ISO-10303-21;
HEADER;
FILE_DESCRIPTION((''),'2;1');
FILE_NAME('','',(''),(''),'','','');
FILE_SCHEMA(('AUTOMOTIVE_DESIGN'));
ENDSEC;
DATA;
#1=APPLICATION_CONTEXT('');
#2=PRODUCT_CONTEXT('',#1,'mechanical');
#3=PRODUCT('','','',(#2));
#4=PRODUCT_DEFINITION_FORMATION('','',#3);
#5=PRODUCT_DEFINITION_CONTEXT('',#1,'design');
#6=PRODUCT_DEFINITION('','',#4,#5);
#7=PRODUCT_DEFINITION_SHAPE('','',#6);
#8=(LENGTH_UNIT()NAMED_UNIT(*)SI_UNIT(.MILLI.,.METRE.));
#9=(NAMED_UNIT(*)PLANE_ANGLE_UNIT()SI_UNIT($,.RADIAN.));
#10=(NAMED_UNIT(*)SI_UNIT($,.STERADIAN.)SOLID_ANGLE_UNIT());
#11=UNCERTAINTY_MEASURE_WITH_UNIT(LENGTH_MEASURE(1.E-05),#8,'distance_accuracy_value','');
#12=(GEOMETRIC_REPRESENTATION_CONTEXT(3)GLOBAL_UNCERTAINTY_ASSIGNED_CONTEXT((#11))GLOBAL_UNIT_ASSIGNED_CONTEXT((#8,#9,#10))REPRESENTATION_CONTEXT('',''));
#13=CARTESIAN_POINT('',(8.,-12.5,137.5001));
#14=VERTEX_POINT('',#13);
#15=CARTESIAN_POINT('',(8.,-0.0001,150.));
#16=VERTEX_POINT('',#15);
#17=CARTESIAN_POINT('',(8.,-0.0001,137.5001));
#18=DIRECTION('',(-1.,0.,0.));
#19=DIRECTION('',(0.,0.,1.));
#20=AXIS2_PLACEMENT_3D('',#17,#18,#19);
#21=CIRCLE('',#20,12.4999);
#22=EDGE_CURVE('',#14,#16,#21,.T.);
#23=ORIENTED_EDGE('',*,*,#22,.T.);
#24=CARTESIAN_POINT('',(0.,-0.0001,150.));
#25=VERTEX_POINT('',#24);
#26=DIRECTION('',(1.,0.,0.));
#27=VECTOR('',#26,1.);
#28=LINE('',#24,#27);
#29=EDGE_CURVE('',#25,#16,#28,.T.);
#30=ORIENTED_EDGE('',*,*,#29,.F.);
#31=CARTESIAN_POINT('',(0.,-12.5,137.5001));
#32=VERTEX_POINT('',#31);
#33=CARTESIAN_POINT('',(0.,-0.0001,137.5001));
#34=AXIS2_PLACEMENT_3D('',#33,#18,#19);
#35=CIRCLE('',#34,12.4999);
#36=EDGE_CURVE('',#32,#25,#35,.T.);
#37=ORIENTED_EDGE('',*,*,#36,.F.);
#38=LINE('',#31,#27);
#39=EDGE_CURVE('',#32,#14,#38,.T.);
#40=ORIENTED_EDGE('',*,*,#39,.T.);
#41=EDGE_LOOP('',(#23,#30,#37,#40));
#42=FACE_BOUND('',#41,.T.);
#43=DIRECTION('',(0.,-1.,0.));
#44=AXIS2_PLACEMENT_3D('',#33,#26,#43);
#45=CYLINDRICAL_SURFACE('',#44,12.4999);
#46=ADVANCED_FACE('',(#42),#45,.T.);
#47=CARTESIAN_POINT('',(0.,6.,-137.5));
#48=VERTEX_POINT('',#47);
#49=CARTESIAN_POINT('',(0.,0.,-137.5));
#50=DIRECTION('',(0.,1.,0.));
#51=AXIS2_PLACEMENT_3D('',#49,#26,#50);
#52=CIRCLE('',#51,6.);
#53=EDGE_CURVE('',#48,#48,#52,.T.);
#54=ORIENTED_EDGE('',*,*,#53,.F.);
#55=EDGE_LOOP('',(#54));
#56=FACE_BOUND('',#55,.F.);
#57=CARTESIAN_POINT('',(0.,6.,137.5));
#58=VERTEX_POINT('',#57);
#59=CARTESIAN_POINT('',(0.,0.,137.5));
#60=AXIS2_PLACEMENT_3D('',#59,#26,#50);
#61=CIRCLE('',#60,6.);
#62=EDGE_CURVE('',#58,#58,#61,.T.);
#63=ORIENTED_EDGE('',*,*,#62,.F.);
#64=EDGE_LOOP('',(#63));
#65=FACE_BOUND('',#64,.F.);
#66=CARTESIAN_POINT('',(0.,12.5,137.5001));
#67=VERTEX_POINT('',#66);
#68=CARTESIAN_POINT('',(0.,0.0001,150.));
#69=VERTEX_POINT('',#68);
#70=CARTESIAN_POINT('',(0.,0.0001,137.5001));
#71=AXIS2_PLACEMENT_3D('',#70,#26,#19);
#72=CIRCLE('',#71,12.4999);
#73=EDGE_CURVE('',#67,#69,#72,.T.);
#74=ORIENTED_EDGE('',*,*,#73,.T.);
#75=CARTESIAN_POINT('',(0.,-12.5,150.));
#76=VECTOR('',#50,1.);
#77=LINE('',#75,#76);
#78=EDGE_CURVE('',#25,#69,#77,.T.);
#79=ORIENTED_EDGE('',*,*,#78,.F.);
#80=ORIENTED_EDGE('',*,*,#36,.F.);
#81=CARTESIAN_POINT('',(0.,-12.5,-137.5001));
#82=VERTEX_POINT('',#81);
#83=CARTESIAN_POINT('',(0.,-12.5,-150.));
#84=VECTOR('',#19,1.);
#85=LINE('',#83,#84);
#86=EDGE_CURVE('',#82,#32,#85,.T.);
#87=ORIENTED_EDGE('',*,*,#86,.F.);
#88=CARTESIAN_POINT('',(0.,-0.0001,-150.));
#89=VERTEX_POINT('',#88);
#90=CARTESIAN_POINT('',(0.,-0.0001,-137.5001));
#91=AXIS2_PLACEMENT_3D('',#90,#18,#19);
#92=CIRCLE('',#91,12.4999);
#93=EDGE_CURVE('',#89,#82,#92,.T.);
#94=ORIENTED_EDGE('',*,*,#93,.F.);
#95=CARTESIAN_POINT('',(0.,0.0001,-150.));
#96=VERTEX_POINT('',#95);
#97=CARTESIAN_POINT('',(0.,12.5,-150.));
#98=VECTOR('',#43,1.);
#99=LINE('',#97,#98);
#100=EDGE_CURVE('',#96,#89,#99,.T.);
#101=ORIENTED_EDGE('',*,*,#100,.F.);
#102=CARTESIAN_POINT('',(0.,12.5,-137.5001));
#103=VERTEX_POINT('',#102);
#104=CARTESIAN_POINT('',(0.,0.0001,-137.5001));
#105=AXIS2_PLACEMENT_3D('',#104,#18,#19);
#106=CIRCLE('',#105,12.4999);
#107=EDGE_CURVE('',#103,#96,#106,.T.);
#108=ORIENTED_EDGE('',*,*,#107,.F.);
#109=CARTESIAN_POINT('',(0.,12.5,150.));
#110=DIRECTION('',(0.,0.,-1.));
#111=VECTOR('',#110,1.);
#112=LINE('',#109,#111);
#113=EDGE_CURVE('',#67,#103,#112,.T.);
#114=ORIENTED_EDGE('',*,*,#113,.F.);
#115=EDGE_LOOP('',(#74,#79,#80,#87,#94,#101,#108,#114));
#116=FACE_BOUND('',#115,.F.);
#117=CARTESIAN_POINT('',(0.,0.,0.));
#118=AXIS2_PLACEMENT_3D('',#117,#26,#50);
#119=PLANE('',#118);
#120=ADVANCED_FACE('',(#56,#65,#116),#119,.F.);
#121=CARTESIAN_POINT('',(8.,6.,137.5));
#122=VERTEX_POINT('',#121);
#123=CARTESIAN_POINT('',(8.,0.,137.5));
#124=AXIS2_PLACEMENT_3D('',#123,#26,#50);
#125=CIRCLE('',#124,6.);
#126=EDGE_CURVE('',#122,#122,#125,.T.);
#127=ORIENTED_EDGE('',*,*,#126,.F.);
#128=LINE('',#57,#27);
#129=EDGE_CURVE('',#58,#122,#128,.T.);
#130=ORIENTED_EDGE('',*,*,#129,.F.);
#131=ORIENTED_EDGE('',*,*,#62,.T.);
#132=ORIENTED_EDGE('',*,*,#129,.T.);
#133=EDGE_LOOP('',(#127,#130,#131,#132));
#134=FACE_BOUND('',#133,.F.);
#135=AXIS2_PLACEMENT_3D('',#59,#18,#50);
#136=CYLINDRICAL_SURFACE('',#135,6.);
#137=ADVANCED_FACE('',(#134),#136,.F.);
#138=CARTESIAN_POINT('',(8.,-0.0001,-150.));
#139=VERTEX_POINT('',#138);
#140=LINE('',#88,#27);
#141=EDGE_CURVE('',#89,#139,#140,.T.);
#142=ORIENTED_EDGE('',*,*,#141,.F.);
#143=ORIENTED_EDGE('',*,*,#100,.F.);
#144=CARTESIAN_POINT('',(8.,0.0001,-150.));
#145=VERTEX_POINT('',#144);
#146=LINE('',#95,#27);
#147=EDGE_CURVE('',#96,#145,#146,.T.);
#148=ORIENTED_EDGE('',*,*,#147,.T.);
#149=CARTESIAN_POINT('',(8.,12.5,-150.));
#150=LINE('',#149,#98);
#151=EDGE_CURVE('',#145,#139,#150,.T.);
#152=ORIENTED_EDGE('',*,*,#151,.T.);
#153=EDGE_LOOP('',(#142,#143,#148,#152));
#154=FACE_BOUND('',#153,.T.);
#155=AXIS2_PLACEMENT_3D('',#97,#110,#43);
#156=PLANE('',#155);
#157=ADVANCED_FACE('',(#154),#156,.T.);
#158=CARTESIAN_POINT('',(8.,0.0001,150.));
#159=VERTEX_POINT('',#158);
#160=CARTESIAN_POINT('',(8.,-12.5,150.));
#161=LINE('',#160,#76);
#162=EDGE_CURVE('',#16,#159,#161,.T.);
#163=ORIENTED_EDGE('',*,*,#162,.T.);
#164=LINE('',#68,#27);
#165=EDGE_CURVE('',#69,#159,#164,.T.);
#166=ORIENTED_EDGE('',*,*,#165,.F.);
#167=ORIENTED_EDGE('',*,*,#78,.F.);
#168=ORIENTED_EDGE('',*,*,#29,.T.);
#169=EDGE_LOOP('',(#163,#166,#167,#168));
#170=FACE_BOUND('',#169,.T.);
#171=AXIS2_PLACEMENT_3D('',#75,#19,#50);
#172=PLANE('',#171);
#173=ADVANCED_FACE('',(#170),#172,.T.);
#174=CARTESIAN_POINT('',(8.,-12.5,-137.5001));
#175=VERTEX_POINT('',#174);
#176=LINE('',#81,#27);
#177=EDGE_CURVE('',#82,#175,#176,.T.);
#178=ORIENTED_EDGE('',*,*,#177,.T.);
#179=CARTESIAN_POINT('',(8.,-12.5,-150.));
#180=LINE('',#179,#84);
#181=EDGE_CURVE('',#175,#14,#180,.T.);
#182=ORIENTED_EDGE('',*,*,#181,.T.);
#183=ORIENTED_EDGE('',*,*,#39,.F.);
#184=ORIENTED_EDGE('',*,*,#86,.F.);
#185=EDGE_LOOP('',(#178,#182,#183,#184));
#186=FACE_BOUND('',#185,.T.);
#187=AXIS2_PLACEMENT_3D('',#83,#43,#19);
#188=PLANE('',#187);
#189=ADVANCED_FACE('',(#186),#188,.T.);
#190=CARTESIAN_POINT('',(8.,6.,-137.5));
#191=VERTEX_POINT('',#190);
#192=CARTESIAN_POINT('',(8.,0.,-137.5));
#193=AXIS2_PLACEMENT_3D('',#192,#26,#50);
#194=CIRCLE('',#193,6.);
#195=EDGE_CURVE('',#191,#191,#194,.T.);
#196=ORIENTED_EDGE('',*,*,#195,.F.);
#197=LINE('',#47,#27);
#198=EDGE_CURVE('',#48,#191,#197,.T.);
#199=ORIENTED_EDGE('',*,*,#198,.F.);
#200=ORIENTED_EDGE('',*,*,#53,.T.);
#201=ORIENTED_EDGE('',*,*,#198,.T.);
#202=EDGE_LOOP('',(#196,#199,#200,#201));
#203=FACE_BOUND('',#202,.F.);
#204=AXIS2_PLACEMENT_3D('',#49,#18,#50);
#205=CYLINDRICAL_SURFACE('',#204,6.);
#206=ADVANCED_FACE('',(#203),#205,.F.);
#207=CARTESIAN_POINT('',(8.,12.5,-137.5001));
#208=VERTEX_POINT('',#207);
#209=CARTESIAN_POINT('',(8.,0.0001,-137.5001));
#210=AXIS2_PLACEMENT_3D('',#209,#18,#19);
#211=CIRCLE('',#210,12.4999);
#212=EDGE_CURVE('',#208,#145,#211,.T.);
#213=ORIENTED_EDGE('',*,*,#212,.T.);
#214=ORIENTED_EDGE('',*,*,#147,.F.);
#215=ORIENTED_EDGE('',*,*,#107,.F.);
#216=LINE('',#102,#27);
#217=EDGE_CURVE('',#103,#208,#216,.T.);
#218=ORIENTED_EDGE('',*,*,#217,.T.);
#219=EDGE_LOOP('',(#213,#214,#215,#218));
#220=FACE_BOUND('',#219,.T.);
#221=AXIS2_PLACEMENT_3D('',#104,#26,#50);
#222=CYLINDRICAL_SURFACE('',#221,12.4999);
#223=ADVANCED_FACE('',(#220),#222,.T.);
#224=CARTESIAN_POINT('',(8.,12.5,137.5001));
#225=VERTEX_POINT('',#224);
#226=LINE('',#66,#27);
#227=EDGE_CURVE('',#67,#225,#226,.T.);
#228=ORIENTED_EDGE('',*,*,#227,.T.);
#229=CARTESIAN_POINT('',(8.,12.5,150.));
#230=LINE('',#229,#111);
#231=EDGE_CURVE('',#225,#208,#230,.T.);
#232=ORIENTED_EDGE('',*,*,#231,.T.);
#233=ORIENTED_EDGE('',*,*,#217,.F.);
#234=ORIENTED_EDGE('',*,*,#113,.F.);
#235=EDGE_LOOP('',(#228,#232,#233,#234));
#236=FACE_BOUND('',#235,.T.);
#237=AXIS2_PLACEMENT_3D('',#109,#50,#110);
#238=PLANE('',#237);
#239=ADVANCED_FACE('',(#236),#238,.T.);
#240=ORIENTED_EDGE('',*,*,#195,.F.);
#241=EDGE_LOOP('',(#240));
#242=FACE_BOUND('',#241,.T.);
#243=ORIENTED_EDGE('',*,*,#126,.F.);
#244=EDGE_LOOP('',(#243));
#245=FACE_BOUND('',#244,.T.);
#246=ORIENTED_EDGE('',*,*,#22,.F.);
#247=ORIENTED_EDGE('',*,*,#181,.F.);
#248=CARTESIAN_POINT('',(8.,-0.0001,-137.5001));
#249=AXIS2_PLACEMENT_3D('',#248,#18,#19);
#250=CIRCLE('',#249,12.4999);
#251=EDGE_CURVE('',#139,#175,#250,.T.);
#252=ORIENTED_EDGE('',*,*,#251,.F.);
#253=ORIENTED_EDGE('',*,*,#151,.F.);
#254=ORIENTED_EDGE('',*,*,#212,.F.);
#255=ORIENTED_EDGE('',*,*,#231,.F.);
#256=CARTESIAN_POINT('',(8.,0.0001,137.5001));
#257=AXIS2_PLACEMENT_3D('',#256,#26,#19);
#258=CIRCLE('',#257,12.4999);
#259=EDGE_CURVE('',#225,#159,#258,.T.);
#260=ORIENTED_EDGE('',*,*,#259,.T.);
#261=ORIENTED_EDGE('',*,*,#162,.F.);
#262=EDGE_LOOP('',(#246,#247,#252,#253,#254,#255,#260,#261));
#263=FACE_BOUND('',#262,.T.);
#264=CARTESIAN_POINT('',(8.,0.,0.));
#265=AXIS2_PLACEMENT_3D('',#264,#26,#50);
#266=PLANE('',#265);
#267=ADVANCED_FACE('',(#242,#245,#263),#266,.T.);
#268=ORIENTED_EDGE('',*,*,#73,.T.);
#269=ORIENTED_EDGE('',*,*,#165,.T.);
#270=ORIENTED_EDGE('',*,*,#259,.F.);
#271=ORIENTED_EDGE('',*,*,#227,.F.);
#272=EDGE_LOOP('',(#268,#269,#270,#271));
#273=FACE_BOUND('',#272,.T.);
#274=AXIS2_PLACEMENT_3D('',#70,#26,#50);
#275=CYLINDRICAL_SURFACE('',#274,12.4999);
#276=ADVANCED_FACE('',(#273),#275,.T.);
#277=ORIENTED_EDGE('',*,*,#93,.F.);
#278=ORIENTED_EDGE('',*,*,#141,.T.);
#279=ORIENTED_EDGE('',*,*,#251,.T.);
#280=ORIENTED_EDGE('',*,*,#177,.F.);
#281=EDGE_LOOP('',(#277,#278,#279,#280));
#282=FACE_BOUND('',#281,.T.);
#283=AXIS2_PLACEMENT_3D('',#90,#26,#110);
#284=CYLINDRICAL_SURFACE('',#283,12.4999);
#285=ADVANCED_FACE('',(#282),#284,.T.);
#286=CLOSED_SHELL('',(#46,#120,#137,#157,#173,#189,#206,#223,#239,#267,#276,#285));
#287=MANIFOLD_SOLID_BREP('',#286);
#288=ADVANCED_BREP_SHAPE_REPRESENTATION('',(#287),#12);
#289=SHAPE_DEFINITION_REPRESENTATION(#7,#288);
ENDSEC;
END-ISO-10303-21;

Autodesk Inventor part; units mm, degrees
ref_plane "YZ Plane" through (0, 0, 0) normal (1, 0, 0) x (0, 1, 0)
ref_plane "XZ Plane" through (0, 0, 0) normal (0, 1, 0) x (-1, 0, 0)
ref_plane "XY Plane" through (0, 0, 0) normal (0, 0, 1) x (1, 0, 0)
sketch "Sketch1" plane through (0, 0, 0) normal (1, 0, 0) x (0, 1, 0)
  line L0 (12.5, 150) -> (12.5, -150)
  line L1 (12.5, -150) -> (-12.5, -150)
  line L2 (-12.5, -150) -> (-12.5, 150)
  line L3 (-12.5, 150) -> (12.5, 150)
  circle A0 centre (0, 137.5) radius 6
  circle A1 centre (0, -137.5) radius 6
  point P0 (0, 0)
  point P1 (-12.5, 56.5)
  point P2 (-12.5, 60.4432)
  dimension "d0" = 300
  dimension "d1" = 25
  dimension "d2" = 12.5
  dimension "d3" = 150
  dimension "d4" = 12
  dimension "d5" = 12.5
  dimension "d6" = 12
  dimension "d7" = 12.5
extrude "Extrusion1" add sketch "Sketch1" along normal blind 8
full round fillet "Full Round Fillet1" first side at (2.6667, 12.5, -50) centre faces at (2.6667, 4.1667, 150) second side at (2.6667, -12.5, 50)
full round fillet "Full Round Fillet2" first side at (5.3333, 12.5, -54.1666) centre faces at (2.6667, -4.1667, -150) second side at (5.3333, -12.5, 41.6667)
properties part number "Braço Macaco" material "Steel AISI 4142 380 QT"
